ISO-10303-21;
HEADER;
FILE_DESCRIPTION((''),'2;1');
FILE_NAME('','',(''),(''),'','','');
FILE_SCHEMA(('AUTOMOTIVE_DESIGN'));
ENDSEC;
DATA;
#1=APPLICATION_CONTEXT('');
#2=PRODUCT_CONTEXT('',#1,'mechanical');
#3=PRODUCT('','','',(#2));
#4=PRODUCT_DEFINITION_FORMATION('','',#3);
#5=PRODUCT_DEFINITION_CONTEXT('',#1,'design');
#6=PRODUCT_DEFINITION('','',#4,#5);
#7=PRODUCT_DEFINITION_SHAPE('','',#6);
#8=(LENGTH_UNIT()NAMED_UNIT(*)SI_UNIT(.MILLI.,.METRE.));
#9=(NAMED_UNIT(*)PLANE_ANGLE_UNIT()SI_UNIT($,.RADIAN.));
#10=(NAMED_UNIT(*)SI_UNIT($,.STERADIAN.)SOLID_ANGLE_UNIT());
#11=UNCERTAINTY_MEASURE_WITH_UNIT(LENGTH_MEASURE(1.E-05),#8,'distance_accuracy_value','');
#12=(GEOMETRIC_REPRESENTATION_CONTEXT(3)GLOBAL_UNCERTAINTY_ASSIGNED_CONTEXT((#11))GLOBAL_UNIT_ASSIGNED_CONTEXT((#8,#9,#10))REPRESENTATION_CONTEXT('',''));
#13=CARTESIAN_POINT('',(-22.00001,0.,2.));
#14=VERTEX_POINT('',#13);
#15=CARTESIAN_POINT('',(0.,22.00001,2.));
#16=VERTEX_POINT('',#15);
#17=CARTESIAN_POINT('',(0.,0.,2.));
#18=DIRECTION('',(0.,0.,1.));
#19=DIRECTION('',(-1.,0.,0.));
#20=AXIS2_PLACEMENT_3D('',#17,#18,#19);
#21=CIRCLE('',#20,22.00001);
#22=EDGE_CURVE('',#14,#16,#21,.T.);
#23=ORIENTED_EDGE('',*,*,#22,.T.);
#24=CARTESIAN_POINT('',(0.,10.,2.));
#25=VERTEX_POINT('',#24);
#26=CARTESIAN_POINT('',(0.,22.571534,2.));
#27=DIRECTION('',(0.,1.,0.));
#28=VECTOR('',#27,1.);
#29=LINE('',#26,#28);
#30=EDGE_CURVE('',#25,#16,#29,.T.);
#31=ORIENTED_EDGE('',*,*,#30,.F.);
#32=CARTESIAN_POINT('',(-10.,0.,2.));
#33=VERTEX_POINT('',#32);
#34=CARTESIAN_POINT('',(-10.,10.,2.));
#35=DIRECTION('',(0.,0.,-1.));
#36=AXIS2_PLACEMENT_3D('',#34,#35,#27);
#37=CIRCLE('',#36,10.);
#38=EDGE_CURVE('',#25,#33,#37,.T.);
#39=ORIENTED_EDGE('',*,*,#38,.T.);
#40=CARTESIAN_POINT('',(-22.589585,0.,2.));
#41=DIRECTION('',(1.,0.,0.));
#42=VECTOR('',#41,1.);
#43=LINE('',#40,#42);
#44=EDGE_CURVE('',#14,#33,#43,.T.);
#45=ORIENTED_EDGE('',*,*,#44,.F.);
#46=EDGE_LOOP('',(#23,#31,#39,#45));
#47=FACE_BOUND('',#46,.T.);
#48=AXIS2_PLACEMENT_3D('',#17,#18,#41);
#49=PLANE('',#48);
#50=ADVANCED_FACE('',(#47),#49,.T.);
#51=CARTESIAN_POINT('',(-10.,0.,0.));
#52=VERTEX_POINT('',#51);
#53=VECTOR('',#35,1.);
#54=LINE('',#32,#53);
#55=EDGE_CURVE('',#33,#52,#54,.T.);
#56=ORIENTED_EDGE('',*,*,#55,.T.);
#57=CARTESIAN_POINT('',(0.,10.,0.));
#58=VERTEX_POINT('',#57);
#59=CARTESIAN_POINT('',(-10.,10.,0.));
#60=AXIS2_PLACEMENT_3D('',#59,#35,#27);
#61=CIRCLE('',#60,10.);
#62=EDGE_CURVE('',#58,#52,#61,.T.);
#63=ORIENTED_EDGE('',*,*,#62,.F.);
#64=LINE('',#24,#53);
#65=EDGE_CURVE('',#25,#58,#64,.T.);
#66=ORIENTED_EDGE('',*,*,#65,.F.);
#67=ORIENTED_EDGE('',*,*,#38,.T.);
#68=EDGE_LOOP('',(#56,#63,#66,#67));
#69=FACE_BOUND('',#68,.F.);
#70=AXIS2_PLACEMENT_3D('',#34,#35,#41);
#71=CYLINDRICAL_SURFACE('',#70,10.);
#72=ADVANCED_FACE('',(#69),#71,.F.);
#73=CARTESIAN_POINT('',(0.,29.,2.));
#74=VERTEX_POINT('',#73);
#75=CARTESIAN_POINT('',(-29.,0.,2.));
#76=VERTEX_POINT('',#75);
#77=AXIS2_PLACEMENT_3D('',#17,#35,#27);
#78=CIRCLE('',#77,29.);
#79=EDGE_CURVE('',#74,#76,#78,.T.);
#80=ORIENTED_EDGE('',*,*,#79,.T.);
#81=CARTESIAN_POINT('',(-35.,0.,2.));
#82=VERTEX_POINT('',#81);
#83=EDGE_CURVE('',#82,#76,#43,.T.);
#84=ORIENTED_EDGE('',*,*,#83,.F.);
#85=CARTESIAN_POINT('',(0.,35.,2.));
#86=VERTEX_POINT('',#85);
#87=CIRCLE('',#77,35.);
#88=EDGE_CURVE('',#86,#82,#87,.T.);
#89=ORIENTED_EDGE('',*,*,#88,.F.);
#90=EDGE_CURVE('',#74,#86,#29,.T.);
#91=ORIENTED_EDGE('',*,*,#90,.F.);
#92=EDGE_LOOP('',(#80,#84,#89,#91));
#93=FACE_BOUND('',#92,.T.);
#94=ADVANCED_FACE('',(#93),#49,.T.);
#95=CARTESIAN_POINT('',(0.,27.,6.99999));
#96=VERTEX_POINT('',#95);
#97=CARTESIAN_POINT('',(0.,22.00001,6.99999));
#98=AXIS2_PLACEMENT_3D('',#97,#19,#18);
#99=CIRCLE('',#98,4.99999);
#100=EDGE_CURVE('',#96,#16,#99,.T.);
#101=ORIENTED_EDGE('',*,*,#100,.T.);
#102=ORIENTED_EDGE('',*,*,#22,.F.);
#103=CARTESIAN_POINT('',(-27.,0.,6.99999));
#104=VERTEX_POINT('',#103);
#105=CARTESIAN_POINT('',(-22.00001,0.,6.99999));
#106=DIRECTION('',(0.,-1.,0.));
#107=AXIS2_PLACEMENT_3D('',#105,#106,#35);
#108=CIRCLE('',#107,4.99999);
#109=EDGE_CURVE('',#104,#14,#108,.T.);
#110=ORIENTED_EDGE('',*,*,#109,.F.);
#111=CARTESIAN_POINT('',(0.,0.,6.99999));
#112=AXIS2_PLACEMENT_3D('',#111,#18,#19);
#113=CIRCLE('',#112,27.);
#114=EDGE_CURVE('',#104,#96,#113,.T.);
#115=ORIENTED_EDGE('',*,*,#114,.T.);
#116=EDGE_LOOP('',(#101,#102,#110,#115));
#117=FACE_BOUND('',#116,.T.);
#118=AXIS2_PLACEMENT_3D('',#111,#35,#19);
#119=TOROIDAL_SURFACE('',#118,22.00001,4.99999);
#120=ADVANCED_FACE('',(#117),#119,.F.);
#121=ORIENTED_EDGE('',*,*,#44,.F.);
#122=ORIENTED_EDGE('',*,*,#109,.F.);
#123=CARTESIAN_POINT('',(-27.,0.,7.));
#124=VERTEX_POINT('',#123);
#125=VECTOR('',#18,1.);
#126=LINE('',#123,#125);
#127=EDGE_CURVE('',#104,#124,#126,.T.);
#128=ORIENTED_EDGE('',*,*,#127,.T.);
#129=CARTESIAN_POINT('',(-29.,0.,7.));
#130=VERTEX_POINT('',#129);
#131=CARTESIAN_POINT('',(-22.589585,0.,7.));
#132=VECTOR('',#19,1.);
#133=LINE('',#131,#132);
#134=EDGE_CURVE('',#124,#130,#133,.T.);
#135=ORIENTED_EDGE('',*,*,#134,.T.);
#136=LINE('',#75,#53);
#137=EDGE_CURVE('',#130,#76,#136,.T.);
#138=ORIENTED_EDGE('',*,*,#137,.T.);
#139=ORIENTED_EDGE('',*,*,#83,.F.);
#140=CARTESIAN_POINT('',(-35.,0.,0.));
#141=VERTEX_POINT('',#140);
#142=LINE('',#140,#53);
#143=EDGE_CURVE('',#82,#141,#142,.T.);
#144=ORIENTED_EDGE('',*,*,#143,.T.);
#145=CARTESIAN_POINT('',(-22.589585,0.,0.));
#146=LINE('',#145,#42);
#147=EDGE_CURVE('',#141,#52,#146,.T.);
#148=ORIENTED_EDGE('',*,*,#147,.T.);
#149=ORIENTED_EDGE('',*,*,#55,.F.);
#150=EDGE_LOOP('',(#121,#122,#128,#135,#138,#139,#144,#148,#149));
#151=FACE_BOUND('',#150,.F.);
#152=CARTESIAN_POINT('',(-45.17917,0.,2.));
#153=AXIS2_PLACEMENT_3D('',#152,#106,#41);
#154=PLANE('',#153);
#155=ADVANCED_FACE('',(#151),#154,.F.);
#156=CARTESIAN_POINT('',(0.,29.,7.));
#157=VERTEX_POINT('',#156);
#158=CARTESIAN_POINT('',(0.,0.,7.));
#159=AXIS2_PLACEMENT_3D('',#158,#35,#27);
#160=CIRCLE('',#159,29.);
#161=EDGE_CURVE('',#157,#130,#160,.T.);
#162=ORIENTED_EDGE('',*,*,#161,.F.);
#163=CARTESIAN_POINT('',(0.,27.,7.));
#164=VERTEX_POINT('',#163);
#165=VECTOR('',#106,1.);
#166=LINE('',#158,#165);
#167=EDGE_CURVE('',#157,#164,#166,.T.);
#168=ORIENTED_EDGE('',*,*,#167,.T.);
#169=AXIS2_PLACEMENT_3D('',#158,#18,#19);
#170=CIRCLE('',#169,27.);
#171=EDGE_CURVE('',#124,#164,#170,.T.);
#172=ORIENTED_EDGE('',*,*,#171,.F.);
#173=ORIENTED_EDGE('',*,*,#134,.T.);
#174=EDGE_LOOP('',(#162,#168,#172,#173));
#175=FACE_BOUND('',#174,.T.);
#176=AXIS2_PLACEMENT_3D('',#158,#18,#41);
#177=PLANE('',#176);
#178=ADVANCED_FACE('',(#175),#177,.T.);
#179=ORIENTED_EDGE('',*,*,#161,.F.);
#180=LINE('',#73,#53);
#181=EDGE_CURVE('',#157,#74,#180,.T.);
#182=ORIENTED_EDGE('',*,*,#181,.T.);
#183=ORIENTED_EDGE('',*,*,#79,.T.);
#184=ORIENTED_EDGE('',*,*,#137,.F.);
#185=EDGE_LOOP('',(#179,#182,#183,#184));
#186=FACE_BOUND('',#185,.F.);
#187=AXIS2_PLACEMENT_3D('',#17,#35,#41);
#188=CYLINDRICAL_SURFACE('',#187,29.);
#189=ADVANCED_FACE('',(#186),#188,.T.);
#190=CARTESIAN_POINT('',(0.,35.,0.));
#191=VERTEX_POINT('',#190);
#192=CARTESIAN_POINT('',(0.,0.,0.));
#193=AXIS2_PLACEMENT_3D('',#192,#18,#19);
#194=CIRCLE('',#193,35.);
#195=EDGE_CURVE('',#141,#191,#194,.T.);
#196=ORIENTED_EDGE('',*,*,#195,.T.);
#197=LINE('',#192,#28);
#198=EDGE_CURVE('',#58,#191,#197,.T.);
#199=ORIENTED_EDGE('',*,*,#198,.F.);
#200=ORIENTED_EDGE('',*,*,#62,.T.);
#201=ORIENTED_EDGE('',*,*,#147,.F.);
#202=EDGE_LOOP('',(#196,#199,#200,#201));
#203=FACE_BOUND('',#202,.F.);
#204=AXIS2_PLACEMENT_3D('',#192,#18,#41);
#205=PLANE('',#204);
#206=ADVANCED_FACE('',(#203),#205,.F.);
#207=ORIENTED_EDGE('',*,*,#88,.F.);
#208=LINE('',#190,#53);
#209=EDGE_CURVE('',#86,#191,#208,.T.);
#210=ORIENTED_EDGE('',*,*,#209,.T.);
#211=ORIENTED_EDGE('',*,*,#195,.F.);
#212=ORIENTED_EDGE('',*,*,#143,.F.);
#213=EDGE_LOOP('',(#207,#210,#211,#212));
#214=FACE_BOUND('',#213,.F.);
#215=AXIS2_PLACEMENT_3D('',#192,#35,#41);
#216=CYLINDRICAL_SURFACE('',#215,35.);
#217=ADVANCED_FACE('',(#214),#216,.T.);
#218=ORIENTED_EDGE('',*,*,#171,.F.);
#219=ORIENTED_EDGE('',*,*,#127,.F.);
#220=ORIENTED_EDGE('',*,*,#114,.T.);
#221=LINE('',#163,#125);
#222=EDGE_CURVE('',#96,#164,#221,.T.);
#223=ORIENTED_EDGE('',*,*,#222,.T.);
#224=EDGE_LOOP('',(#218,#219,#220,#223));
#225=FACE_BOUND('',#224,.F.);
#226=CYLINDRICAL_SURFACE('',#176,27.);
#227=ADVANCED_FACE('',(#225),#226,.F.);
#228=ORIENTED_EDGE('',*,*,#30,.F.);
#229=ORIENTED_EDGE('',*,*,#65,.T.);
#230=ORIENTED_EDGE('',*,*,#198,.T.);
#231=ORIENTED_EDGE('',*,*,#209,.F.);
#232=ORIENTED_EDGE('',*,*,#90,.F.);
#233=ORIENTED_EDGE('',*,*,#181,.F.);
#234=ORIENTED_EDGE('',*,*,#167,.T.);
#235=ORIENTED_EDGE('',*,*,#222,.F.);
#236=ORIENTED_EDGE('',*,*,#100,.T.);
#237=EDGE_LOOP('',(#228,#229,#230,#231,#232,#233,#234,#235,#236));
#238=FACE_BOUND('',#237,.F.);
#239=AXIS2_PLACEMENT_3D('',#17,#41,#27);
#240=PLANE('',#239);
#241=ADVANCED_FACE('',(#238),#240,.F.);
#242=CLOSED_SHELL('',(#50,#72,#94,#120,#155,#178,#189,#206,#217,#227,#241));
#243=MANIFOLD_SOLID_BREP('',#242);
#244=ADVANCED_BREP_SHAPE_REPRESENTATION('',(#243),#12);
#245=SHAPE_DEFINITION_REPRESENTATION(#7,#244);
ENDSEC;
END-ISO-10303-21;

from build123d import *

# Parameters (mm, degrees)
F0_R          = 35
F1_DEPTH      = 2
F2_R          = 29
F3_DEPTH      = 5
F4_R          = 27
F5_DEPTH      = 5
F6_W          = 45.179169625
F6_H          = 45.1430678368
F7_DEPTH      = 2.001
F7_DEPTH_BACK = 5.001
F8_R          = 4.99999
F9_R          = 10


# Not quite as in the source:
# - a fillet or chamfer is up to 0.001 mm smaller than in the source, because OpenCascade refuses the exact size


with BuildPart() as f1:
    # F0 (on Top) → F1 (new body)
    with BuildSketch(Plane.XY):
        Circle(F0_R)
    extrude(amount=F1_DEPTH)

    # F2 (on face) → F3 (join)
    with BuildSketch(Plane.XY.offset(2)):
        Circle(F2_R)
    extrude(amount=F3_DEPTH)

    # F4 (on face) → F5 (cut, through all)
    with BuildSketch(Plane.XY.offset(7)):
        Circle(F4_R)
    extrude(amount=-F5_DEPTH, mode=Mode.SUBTRACT)

    # F6 (on face) → F7 (cut, two sides)
    with BuildSketch(Plane.XY.offset(2)) as f7_sk:
        with Locations((-22.5895848125, 22.5715339184)):
            Rectangle(F6_W, F6_H)
    extrude(amount=-F7_DEPTH, mode=Mode.SUBTRACT)
    extrude(f7_sk.sketch, amount=F7_DEPTH_BACK, mode=Mode.SUBTRACT)

    # F8 (radius 5 in the source; OpenCascade refuses exactly that, so slightly less here)
    f8_edges = [f1.edges().sort_by_distance(p)[0] for p in [
        (19.091883, -19.091883, 2),
    ]]
    fillet(f8_edges, radius=F8_R)

    # F9
    f9_edges = [f1.edges().sort_by_distance(p)[0] for p in [
        (0, 0, 1),
    ]]
    fillet(f9_edges, radius=F9_R)


solid = f1.part
